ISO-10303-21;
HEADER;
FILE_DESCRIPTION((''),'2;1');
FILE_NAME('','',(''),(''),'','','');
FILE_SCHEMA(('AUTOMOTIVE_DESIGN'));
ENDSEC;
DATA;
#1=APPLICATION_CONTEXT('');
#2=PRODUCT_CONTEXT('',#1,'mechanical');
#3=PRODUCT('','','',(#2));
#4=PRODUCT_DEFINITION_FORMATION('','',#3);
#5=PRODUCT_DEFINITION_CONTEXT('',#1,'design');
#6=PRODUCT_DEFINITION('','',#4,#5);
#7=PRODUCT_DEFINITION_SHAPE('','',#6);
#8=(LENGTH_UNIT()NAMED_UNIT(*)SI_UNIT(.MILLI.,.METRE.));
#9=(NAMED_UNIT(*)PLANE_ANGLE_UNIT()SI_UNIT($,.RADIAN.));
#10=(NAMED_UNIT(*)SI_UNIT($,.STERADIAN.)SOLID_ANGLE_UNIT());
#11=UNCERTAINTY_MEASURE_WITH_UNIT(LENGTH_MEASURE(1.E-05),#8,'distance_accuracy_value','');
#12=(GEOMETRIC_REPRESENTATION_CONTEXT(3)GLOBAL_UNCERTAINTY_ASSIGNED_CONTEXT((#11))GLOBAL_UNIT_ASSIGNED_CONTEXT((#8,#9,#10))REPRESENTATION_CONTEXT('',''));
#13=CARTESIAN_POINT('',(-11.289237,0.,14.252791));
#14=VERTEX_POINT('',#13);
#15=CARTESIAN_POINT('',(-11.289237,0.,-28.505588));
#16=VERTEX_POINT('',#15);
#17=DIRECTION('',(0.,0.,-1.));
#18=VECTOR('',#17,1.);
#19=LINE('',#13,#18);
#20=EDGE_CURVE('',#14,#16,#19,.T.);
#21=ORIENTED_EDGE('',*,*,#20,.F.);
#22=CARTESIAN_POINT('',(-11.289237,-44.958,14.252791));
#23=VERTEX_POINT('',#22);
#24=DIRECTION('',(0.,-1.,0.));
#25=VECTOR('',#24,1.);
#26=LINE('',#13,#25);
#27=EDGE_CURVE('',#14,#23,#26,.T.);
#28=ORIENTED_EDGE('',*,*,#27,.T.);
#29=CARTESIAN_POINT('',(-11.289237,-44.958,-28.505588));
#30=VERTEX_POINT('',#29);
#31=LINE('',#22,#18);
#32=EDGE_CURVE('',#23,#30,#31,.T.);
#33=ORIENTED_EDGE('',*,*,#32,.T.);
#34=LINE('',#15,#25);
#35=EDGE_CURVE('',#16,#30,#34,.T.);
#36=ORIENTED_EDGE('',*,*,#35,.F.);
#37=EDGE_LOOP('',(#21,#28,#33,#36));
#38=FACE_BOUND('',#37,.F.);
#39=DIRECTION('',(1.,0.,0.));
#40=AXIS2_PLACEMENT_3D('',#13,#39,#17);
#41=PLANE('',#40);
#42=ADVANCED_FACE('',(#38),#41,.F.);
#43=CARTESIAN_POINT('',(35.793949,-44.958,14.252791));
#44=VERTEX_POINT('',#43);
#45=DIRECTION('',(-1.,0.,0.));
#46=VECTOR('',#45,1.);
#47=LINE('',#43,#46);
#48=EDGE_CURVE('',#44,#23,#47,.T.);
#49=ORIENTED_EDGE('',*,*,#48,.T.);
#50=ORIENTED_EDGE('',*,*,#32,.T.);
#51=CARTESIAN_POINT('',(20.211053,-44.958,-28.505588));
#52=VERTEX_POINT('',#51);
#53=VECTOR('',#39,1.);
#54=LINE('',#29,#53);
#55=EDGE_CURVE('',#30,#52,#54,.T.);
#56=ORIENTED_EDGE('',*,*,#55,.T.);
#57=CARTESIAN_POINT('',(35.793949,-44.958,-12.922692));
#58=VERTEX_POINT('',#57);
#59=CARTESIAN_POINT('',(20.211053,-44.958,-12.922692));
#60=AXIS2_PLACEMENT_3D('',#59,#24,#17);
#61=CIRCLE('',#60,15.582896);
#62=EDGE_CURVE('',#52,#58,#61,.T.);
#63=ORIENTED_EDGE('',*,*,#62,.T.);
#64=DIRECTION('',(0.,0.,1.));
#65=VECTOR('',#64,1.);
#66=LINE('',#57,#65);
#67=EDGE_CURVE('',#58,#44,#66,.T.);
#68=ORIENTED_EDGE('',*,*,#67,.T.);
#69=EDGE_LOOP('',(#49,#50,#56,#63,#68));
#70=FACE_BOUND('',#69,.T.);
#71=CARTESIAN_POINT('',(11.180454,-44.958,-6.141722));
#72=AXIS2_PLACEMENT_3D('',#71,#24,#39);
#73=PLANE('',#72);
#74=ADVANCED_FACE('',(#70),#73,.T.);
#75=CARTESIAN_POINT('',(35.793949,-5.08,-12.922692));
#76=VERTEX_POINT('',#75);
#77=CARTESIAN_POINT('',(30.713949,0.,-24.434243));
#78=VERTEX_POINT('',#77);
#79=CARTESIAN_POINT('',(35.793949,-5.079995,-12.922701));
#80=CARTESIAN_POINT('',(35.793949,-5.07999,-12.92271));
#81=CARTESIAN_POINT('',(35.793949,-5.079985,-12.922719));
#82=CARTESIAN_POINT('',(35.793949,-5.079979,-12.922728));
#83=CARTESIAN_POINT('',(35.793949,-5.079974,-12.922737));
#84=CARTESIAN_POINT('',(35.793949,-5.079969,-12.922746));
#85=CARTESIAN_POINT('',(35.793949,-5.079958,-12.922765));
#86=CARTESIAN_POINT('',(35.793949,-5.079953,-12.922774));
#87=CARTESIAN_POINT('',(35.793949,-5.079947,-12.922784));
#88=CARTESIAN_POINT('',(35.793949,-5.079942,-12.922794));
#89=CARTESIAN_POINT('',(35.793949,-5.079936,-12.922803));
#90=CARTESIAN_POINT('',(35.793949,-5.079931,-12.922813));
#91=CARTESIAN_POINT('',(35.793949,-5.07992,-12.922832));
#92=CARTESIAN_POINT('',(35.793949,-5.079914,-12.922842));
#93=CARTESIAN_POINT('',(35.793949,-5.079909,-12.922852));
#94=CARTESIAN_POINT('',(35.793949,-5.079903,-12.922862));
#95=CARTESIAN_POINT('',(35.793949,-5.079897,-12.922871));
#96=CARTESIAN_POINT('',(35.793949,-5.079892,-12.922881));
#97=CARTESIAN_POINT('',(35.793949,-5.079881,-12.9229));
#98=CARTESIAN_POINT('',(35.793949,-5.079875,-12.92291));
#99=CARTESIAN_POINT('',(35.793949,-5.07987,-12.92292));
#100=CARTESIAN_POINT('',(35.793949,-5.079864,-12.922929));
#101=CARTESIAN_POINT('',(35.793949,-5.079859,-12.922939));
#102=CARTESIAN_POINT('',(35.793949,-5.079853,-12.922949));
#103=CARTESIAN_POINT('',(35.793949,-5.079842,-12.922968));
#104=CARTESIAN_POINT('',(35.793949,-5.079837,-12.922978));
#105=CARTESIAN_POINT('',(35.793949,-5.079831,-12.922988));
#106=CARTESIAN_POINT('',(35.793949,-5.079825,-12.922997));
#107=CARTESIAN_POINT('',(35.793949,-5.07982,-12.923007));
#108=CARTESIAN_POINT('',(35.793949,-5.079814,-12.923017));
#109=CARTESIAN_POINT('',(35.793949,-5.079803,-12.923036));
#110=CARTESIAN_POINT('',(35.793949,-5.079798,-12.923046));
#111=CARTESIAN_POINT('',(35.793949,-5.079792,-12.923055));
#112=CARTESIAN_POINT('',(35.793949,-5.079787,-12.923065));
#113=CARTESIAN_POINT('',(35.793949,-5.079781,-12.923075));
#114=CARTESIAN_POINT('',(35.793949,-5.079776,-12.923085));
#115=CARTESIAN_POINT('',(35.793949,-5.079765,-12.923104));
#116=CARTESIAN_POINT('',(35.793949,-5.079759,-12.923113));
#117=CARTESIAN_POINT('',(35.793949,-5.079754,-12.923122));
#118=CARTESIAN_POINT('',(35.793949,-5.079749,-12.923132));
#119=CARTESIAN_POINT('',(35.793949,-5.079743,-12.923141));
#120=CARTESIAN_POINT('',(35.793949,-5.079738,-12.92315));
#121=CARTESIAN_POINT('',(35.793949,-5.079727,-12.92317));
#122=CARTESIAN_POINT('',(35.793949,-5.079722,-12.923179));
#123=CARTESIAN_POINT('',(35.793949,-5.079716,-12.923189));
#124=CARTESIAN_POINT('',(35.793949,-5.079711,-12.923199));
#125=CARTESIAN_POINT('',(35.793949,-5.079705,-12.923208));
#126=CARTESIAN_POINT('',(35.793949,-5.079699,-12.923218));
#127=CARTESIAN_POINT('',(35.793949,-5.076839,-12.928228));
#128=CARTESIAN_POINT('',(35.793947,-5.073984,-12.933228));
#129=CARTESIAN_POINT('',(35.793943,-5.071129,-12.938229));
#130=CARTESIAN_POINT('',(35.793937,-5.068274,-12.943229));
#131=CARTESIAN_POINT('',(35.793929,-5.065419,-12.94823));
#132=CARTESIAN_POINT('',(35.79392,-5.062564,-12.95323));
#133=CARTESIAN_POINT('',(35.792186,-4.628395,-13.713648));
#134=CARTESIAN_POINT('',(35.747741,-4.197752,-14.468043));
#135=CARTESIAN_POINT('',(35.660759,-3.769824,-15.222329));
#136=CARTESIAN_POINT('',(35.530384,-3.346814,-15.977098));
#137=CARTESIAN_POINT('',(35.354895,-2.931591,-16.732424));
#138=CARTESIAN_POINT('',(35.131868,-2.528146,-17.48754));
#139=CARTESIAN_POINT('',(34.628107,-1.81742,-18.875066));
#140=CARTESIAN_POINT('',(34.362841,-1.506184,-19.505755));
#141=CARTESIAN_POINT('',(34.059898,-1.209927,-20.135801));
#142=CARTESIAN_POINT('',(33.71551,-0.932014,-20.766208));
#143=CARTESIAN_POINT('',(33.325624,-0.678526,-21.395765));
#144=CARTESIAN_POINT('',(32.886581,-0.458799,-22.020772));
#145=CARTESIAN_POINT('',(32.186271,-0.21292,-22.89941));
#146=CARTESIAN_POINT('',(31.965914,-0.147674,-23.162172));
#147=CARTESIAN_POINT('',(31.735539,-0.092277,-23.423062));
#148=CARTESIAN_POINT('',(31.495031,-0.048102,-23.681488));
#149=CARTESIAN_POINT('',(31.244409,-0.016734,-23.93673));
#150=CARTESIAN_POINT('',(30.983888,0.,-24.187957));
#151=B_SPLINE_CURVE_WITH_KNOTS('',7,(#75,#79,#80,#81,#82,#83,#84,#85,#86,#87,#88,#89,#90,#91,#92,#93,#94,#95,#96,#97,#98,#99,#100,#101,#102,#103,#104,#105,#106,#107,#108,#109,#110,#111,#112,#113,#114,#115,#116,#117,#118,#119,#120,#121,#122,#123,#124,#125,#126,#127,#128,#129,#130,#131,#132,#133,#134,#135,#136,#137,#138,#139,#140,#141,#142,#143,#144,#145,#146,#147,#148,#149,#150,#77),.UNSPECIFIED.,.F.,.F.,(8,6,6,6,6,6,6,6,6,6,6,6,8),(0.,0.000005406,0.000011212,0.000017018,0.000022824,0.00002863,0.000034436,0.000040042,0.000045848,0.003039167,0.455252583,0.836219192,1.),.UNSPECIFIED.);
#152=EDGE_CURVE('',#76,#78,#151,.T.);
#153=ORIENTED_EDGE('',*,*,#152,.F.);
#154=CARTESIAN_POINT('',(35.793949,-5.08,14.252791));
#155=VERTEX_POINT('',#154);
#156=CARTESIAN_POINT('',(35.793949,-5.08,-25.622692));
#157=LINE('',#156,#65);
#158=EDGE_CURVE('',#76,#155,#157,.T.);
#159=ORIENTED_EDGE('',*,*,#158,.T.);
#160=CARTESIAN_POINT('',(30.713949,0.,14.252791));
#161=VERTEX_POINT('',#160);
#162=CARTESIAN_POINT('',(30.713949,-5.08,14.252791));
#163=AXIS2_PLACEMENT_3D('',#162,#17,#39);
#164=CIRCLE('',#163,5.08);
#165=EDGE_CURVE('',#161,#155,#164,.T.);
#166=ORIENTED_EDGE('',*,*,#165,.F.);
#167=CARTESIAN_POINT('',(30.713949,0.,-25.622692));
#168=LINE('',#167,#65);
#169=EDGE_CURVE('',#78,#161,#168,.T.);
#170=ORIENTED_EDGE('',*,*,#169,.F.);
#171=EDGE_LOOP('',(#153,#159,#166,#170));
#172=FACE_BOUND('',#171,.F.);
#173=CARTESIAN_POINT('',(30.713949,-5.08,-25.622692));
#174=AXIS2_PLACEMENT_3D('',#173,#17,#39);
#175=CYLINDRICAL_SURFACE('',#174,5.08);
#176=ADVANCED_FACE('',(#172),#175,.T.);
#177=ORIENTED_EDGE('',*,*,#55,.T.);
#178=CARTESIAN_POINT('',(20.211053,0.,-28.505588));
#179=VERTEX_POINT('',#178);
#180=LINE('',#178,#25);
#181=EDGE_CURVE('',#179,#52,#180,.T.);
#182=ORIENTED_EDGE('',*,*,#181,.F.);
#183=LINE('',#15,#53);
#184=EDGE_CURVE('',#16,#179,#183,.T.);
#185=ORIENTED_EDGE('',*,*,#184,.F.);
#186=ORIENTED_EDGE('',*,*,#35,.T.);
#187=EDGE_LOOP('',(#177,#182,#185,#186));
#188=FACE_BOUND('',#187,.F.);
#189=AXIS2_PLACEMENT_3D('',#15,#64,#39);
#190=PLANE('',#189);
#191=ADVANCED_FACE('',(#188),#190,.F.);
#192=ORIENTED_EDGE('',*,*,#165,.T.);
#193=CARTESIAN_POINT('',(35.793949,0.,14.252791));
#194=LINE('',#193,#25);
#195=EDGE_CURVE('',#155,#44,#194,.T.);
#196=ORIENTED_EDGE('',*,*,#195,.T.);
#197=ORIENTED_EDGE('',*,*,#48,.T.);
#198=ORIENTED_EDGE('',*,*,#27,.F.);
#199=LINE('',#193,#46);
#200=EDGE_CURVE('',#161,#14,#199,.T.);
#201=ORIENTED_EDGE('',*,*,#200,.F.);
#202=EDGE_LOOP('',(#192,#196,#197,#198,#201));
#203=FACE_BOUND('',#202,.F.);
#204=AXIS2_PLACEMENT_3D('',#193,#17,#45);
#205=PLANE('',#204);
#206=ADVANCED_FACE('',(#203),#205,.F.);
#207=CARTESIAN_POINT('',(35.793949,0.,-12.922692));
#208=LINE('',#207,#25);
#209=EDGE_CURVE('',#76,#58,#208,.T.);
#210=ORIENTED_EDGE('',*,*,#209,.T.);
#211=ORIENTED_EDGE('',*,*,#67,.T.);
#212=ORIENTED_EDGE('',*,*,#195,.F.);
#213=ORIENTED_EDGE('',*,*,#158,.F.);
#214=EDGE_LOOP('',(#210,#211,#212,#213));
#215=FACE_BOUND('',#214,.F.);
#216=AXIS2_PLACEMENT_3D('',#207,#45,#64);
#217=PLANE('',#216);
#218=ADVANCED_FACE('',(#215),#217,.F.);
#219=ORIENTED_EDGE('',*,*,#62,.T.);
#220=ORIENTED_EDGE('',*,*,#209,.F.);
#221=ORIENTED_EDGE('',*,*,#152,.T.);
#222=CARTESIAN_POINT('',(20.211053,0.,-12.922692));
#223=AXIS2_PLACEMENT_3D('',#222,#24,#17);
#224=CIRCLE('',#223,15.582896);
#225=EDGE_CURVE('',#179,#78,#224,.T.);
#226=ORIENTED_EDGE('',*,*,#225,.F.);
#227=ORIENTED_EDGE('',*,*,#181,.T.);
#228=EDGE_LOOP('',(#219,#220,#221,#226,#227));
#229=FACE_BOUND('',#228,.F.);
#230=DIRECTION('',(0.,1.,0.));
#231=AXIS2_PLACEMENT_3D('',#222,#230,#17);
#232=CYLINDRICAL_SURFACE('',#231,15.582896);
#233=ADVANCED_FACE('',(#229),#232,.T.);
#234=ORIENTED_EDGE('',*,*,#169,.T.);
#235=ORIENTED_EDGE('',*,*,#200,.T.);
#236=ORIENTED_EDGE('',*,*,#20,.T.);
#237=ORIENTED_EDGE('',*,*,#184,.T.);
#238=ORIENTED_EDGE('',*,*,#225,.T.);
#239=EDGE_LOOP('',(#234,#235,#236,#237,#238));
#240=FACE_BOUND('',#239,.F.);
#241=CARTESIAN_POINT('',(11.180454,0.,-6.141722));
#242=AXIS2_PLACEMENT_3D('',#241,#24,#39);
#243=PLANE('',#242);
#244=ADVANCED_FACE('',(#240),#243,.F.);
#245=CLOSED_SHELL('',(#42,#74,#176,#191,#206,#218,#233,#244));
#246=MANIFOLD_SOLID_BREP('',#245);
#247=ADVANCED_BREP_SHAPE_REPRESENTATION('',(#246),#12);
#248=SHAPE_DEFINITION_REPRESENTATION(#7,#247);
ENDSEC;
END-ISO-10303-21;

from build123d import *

# Parameters (mm, degrees)
F1_DEPTH    = 44.958
F2_T1_DEPTH = 52.5754828874


# Not quite as in the source:
# - a fillet or chamfer that OpenCascade refuses, or shapes differently, is made with other operations: its cross-section is extruded or revolved along the edge and cut away or added


with BuildPart() as f1:
    # F0 (on Front) → F1 (new body)
    with BuildSketch(Plane.XZ):
        with BuildLine():
            Line((35.7939489186, 14.252791281), (-11.2892372768, 14.252791281))
            Line((-11.2892372768, 14.252791281), (-11.2892372768, -28.5055878506))
            Line((-11.2892372768, -28.5055878506), (20.2110526745, -28.5055878506))
            ThreePointArc((20.2110526745, -28.5055878506), (31.2298242792, -23.9414632112), (35.7939489186, -12.9226916064))
            Line((35.7939489186, -12.9226916064), (35.7939489186, 14.252791281))
        make_face()
    extrude(amount=F1_DEPTH)

    # F2: fillet of radius 5.08 on 1 edges, made by hand

    # F2_s2 → F2_t1 (cut)
    with BuildSketch(Plane.XY.offset(-25.6226916064)):
        with BuildLine():
            ThreePointArc((35.7939489186, -5.08), (34.306051367, -1.4878975516), (30.7139489186, 0))
            Line((30.7139489186, 0), (35.7939489186, 0))
            Line((35.7939489186, 0), (35.7939489186, -5.08))
        make_face()
    extrude(amount=F2_T1_DEPTH, mode=Mode.SUBTRACT)


solid = f1.part
